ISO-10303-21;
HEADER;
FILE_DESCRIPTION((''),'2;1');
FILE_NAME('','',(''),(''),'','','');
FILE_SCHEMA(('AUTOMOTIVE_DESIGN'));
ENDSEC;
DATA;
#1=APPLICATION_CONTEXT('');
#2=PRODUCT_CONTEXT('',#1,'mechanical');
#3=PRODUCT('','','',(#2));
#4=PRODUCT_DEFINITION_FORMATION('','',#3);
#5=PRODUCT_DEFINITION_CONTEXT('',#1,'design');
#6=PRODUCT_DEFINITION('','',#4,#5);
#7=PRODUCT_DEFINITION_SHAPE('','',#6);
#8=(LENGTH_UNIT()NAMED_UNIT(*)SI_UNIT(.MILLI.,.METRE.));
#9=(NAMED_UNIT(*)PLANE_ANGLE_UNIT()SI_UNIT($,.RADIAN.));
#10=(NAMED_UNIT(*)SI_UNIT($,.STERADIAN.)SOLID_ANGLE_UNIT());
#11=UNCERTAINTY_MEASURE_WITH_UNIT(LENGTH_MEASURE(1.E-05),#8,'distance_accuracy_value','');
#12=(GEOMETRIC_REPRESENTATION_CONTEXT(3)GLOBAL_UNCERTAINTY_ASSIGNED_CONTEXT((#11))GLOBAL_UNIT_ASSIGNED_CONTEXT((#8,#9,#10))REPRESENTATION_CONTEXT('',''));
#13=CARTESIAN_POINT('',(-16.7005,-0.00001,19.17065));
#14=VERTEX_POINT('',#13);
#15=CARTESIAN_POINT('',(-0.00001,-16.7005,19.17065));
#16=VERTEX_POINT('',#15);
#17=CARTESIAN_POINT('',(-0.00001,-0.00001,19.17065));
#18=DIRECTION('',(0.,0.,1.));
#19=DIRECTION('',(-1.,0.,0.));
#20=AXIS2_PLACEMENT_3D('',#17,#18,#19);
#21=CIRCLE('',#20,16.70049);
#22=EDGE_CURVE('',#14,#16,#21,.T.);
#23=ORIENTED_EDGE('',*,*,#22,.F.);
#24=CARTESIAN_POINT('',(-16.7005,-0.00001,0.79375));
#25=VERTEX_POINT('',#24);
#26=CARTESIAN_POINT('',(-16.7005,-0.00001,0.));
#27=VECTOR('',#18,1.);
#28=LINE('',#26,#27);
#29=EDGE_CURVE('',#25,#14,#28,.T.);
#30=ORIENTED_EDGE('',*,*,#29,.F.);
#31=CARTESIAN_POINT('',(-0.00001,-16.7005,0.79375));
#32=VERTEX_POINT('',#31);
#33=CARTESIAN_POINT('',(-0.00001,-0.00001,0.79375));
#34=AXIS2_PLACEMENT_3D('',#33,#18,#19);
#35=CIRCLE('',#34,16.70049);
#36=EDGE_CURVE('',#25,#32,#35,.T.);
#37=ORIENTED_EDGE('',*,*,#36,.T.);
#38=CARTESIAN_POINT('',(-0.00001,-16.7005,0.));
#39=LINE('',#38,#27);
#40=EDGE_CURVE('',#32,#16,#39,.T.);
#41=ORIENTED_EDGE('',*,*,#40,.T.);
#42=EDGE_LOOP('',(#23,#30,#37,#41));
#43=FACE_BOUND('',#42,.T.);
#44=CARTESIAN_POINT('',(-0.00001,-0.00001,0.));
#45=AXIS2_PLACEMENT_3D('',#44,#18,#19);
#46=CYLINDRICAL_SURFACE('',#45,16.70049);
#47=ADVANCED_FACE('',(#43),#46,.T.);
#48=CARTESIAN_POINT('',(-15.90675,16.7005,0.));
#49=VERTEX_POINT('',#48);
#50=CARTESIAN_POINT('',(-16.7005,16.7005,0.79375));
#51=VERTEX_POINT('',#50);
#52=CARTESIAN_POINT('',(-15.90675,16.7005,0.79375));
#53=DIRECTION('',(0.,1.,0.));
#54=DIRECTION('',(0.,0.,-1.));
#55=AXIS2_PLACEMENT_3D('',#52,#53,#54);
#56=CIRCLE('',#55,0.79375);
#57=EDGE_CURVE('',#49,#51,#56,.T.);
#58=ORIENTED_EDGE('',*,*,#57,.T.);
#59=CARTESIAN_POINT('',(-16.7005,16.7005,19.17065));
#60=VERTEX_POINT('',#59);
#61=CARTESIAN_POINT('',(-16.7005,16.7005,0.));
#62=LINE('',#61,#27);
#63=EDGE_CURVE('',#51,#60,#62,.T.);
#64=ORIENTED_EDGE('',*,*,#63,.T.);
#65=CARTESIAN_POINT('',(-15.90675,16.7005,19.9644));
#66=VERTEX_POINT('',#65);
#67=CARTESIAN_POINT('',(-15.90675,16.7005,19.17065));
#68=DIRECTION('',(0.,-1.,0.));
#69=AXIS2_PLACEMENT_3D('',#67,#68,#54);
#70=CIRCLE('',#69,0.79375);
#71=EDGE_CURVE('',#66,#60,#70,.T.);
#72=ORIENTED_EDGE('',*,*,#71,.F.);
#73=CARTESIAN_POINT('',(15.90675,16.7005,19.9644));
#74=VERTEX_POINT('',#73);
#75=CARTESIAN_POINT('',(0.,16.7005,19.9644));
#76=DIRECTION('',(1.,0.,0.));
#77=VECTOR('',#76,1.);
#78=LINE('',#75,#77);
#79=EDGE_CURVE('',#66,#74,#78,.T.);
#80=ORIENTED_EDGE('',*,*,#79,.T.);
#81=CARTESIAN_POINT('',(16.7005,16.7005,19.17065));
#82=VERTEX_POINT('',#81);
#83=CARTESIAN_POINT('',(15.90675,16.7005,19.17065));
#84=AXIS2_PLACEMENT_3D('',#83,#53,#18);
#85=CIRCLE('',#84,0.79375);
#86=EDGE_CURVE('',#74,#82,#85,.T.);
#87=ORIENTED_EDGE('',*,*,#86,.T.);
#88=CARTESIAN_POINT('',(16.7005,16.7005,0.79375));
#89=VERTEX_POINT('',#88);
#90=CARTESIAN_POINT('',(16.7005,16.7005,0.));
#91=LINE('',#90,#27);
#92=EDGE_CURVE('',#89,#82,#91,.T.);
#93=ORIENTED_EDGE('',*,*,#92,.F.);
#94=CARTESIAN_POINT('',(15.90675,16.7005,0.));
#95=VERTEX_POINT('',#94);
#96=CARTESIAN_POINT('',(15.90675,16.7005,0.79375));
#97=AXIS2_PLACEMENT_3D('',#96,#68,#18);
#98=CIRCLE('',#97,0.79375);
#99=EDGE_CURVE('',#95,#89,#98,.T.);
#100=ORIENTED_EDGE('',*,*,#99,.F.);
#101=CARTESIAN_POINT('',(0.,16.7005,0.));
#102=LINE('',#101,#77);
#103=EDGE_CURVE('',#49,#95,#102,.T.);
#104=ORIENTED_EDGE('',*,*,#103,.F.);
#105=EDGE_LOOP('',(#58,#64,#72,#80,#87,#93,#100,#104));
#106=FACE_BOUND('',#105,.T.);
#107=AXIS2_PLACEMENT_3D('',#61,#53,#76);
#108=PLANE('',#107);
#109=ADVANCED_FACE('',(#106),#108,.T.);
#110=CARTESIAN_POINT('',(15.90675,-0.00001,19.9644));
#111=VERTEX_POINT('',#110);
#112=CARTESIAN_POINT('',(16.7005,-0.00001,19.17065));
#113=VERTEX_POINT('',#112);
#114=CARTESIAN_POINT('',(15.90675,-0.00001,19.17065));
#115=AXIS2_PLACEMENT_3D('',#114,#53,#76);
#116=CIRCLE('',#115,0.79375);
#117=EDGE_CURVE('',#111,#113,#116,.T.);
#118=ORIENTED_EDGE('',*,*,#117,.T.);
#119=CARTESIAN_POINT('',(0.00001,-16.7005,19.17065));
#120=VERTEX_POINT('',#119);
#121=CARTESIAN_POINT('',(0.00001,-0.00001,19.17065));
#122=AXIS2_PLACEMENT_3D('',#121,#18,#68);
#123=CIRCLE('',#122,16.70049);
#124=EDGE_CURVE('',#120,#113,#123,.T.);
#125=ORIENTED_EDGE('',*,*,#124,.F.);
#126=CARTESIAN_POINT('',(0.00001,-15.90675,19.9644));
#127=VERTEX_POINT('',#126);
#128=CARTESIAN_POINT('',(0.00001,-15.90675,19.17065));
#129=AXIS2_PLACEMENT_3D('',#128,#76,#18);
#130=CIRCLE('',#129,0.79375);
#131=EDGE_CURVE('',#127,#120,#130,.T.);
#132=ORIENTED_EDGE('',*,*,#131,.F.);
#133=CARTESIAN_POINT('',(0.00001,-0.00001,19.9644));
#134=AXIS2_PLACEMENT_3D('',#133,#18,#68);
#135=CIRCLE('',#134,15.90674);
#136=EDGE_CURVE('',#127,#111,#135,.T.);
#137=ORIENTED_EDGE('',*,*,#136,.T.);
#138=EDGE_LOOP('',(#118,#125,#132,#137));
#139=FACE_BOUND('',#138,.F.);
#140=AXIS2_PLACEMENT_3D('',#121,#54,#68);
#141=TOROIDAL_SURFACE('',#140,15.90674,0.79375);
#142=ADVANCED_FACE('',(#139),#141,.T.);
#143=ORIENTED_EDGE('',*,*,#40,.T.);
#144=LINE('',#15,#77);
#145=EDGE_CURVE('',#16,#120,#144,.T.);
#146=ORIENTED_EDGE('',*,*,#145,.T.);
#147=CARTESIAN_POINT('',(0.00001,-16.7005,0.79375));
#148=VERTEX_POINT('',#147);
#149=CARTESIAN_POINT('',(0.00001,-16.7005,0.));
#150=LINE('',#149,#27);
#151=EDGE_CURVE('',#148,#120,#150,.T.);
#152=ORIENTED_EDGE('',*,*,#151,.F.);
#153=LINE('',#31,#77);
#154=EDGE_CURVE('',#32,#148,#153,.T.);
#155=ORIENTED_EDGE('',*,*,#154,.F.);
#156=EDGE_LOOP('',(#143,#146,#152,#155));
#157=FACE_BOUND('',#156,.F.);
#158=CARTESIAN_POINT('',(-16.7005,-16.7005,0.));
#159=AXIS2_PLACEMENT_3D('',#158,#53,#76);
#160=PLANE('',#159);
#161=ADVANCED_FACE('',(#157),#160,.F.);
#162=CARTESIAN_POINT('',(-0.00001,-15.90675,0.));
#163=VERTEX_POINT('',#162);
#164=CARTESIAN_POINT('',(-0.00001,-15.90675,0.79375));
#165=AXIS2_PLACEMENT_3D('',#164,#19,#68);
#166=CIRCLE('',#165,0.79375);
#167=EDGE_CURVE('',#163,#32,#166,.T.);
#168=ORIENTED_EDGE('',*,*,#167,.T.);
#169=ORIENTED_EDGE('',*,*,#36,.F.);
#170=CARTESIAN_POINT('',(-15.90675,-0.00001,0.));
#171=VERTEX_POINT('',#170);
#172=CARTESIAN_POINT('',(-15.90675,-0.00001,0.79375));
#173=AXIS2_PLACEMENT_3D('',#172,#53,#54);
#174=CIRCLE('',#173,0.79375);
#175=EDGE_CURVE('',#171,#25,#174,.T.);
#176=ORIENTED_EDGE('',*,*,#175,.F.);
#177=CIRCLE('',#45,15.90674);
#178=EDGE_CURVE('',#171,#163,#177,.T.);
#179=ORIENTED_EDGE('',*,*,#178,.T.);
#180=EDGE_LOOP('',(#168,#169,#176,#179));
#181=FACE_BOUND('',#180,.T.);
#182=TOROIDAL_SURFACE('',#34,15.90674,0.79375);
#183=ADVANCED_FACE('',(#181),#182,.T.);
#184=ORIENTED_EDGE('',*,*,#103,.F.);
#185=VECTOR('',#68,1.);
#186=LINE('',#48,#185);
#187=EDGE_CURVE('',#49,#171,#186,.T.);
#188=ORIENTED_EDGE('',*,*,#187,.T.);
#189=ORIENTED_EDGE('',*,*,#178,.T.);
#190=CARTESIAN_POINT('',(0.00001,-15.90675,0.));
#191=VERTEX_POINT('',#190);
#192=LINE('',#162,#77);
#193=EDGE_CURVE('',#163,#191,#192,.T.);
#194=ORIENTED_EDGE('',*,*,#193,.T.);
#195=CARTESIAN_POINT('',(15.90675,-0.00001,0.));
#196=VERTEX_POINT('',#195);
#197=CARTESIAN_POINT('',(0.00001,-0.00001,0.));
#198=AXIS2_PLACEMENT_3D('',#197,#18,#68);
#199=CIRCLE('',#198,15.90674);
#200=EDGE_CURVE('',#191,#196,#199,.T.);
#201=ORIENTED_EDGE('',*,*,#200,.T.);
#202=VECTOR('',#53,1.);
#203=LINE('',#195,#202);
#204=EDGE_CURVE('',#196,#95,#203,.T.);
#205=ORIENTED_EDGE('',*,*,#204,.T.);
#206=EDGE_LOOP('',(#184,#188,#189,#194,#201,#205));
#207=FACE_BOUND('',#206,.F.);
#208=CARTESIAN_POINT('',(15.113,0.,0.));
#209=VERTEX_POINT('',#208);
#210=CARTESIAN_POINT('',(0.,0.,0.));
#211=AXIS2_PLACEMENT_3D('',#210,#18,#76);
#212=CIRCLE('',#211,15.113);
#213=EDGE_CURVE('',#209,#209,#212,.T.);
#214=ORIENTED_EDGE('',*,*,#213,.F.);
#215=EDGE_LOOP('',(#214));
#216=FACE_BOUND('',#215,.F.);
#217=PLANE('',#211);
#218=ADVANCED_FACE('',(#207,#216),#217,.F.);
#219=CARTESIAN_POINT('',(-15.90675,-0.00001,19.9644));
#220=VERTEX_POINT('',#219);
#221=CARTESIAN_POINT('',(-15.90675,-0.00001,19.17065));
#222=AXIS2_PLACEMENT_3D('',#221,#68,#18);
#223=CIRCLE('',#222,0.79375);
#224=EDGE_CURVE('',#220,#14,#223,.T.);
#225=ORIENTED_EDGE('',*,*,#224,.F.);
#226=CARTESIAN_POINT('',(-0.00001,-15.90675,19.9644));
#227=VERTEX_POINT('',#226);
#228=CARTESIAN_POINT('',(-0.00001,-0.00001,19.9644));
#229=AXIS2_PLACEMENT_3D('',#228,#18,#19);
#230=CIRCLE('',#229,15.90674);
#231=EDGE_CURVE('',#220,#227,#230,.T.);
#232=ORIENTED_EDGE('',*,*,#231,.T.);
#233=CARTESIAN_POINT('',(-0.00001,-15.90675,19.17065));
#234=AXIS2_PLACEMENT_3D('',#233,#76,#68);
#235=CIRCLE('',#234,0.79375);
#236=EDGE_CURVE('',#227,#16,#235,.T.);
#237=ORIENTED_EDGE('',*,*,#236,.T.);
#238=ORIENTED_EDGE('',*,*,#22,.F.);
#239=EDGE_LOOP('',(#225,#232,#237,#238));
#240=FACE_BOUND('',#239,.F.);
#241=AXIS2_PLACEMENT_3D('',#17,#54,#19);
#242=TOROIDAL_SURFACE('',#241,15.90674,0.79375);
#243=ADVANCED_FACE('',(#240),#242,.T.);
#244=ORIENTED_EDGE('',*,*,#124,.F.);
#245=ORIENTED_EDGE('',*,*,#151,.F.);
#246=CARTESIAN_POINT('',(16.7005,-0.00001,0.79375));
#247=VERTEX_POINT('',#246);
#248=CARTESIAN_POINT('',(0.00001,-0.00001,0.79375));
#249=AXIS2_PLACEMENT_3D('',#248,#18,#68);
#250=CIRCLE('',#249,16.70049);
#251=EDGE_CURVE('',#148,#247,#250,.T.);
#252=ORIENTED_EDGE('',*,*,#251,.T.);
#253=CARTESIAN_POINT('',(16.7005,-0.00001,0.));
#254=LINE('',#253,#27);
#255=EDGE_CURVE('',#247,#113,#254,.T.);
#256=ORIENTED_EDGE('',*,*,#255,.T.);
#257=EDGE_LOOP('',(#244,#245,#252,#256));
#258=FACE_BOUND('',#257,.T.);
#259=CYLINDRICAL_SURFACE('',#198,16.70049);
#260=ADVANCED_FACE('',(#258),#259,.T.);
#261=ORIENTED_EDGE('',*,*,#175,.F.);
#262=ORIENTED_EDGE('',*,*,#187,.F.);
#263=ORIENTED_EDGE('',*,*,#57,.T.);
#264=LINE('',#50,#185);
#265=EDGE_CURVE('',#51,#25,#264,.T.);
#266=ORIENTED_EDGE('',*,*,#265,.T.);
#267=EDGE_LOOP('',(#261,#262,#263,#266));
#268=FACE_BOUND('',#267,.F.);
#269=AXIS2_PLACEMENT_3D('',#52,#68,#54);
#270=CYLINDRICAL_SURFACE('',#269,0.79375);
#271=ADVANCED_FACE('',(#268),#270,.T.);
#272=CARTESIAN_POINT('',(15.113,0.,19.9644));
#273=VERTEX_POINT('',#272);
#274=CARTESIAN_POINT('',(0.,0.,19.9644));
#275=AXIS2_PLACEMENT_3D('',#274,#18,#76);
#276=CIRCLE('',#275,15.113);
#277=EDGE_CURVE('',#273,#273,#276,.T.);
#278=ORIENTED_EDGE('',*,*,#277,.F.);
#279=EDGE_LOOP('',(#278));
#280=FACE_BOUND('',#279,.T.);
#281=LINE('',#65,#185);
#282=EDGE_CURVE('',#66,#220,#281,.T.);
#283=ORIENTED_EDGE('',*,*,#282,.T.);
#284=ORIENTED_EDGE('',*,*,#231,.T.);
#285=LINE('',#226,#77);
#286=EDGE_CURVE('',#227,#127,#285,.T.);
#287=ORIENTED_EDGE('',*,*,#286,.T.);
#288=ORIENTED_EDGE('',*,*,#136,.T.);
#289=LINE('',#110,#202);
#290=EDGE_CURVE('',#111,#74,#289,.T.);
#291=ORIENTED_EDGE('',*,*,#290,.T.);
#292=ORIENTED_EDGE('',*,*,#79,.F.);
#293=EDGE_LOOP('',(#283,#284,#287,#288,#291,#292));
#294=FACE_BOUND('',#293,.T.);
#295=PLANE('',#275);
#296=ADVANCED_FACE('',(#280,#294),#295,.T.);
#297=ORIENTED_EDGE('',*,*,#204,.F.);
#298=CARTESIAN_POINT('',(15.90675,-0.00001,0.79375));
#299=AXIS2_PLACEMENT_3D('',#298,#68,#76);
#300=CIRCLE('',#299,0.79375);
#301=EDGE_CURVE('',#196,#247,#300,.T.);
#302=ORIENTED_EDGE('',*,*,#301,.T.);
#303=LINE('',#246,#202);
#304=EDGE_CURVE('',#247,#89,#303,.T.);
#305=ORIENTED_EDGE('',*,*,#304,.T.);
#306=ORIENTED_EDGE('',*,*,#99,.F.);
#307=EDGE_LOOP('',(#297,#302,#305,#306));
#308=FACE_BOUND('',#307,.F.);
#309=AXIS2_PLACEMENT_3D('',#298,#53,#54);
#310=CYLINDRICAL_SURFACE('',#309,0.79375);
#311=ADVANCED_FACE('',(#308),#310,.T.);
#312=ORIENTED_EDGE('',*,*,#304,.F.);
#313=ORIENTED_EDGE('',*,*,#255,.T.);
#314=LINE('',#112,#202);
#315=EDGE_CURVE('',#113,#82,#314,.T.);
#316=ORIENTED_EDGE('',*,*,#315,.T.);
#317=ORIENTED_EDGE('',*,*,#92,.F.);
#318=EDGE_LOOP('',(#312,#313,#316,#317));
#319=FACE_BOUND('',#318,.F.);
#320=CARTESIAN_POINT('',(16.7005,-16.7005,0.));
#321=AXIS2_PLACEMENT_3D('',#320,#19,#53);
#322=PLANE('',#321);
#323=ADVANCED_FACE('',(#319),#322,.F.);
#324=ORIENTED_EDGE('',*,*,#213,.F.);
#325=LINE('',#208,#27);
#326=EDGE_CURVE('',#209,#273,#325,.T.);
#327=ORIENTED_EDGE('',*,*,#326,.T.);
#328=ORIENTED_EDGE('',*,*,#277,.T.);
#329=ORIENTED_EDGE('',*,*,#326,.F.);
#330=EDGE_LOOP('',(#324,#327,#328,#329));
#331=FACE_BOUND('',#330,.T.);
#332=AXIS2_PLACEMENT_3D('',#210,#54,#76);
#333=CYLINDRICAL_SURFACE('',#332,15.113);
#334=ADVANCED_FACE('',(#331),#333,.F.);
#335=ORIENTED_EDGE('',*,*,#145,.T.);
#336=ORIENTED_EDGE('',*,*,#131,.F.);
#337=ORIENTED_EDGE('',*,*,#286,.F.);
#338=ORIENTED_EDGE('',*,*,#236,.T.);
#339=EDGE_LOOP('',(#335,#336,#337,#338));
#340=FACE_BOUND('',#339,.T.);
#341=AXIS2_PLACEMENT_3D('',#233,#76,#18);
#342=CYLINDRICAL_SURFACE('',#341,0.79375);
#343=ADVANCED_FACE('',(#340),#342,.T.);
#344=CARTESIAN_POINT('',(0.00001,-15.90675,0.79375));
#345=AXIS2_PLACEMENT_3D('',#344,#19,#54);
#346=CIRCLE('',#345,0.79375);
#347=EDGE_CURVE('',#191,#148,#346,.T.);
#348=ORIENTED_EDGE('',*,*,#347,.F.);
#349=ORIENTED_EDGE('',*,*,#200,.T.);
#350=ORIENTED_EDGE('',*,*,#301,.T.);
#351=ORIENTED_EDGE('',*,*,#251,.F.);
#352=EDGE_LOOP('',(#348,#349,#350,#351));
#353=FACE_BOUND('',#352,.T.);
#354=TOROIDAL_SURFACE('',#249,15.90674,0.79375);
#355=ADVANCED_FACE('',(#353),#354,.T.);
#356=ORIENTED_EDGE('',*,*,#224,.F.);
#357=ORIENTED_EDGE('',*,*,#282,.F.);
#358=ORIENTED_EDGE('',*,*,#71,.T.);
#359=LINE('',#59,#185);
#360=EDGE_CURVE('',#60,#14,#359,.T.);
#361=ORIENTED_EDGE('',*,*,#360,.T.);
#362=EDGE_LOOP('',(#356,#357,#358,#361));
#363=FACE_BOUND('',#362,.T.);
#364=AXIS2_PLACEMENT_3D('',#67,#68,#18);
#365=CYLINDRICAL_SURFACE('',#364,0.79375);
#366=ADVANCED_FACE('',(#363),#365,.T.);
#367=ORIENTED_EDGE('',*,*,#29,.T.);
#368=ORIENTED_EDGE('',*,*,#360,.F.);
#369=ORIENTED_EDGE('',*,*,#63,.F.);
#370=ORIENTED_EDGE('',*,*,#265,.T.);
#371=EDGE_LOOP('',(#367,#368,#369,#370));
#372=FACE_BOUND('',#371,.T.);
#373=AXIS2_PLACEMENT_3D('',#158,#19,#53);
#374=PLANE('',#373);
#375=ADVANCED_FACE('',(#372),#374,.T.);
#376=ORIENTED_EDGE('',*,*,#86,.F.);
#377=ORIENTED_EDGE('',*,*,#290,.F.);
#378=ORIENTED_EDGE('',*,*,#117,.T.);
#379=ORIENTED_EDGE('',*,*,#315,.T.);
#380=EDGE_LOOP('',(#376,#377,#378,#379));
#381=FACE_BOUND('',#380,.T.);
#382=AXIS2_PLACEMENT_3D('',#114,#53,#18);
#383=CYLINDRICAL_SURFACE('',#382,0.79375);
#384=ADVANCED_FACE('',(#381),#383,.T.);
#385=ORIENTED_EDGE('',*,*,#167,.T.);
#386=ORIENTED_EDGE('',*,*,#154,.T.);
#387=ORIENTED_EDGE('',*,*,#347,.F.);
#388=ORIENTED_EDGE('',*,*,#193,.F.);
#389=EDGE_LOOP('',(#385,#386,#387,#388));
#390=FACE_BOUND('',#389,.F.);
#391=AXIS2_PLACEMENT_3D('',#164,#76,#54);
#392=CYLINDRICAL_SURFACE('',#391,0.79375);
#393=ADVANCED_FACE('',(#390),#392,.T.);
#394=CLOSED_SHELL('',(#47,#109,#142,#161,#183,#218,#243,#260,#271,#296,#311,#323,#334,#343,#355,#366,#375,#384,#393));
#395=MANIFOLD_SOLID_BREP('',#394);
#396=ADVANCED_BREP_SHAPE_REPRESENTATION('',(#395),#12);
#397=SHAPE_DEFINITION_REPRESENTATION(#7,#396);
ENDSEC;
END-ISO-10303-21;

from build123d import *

# Parameters (mm, degrees)
F0_W     = 33.401
F0_H     = 33.401
F0_R     = 15.113
F1_DEPTH = 19.9644
F2_R     = 16.70049
F3_R     = 0.79375


# Not quite as in the source:
# - a fillet or chamfer is up to 0.001 mm smaller than in the source, because OpenCascade refuses the exact size


with BuildPart() as f1:
    # F0 (on Top) → F1 (new body)
    with BuildSketch(Plane.XY):
        Rectangle(F0_W, F0_H)
        Circle(F0_R, mode=Mode.SUBTRACT)
    extrude(amount=F1_DEPTH)

    # F2 (radius 16.7005 in the source; OpenCascade refuses exactly that, so slightly less here)
    f2_edges = [f1.edges().sort_by_distance(p)[0] for p in [
        (-16.7005, -16.7005, 9.9822),
        (16.7005, -16.7005, 9.9822),
    ]]
    fillet(f2_edges, radius=F2_R)

    # F3
    f3_edges = [f1.edges().sort_by_distance(p)[0] for p in [
        (11.80904, -11.80904, 19.9644),
        (11.80904, -11.80904, 0),
    ]]
    fillet(f3_edges, radius=F3_R)


solid = f1.part
